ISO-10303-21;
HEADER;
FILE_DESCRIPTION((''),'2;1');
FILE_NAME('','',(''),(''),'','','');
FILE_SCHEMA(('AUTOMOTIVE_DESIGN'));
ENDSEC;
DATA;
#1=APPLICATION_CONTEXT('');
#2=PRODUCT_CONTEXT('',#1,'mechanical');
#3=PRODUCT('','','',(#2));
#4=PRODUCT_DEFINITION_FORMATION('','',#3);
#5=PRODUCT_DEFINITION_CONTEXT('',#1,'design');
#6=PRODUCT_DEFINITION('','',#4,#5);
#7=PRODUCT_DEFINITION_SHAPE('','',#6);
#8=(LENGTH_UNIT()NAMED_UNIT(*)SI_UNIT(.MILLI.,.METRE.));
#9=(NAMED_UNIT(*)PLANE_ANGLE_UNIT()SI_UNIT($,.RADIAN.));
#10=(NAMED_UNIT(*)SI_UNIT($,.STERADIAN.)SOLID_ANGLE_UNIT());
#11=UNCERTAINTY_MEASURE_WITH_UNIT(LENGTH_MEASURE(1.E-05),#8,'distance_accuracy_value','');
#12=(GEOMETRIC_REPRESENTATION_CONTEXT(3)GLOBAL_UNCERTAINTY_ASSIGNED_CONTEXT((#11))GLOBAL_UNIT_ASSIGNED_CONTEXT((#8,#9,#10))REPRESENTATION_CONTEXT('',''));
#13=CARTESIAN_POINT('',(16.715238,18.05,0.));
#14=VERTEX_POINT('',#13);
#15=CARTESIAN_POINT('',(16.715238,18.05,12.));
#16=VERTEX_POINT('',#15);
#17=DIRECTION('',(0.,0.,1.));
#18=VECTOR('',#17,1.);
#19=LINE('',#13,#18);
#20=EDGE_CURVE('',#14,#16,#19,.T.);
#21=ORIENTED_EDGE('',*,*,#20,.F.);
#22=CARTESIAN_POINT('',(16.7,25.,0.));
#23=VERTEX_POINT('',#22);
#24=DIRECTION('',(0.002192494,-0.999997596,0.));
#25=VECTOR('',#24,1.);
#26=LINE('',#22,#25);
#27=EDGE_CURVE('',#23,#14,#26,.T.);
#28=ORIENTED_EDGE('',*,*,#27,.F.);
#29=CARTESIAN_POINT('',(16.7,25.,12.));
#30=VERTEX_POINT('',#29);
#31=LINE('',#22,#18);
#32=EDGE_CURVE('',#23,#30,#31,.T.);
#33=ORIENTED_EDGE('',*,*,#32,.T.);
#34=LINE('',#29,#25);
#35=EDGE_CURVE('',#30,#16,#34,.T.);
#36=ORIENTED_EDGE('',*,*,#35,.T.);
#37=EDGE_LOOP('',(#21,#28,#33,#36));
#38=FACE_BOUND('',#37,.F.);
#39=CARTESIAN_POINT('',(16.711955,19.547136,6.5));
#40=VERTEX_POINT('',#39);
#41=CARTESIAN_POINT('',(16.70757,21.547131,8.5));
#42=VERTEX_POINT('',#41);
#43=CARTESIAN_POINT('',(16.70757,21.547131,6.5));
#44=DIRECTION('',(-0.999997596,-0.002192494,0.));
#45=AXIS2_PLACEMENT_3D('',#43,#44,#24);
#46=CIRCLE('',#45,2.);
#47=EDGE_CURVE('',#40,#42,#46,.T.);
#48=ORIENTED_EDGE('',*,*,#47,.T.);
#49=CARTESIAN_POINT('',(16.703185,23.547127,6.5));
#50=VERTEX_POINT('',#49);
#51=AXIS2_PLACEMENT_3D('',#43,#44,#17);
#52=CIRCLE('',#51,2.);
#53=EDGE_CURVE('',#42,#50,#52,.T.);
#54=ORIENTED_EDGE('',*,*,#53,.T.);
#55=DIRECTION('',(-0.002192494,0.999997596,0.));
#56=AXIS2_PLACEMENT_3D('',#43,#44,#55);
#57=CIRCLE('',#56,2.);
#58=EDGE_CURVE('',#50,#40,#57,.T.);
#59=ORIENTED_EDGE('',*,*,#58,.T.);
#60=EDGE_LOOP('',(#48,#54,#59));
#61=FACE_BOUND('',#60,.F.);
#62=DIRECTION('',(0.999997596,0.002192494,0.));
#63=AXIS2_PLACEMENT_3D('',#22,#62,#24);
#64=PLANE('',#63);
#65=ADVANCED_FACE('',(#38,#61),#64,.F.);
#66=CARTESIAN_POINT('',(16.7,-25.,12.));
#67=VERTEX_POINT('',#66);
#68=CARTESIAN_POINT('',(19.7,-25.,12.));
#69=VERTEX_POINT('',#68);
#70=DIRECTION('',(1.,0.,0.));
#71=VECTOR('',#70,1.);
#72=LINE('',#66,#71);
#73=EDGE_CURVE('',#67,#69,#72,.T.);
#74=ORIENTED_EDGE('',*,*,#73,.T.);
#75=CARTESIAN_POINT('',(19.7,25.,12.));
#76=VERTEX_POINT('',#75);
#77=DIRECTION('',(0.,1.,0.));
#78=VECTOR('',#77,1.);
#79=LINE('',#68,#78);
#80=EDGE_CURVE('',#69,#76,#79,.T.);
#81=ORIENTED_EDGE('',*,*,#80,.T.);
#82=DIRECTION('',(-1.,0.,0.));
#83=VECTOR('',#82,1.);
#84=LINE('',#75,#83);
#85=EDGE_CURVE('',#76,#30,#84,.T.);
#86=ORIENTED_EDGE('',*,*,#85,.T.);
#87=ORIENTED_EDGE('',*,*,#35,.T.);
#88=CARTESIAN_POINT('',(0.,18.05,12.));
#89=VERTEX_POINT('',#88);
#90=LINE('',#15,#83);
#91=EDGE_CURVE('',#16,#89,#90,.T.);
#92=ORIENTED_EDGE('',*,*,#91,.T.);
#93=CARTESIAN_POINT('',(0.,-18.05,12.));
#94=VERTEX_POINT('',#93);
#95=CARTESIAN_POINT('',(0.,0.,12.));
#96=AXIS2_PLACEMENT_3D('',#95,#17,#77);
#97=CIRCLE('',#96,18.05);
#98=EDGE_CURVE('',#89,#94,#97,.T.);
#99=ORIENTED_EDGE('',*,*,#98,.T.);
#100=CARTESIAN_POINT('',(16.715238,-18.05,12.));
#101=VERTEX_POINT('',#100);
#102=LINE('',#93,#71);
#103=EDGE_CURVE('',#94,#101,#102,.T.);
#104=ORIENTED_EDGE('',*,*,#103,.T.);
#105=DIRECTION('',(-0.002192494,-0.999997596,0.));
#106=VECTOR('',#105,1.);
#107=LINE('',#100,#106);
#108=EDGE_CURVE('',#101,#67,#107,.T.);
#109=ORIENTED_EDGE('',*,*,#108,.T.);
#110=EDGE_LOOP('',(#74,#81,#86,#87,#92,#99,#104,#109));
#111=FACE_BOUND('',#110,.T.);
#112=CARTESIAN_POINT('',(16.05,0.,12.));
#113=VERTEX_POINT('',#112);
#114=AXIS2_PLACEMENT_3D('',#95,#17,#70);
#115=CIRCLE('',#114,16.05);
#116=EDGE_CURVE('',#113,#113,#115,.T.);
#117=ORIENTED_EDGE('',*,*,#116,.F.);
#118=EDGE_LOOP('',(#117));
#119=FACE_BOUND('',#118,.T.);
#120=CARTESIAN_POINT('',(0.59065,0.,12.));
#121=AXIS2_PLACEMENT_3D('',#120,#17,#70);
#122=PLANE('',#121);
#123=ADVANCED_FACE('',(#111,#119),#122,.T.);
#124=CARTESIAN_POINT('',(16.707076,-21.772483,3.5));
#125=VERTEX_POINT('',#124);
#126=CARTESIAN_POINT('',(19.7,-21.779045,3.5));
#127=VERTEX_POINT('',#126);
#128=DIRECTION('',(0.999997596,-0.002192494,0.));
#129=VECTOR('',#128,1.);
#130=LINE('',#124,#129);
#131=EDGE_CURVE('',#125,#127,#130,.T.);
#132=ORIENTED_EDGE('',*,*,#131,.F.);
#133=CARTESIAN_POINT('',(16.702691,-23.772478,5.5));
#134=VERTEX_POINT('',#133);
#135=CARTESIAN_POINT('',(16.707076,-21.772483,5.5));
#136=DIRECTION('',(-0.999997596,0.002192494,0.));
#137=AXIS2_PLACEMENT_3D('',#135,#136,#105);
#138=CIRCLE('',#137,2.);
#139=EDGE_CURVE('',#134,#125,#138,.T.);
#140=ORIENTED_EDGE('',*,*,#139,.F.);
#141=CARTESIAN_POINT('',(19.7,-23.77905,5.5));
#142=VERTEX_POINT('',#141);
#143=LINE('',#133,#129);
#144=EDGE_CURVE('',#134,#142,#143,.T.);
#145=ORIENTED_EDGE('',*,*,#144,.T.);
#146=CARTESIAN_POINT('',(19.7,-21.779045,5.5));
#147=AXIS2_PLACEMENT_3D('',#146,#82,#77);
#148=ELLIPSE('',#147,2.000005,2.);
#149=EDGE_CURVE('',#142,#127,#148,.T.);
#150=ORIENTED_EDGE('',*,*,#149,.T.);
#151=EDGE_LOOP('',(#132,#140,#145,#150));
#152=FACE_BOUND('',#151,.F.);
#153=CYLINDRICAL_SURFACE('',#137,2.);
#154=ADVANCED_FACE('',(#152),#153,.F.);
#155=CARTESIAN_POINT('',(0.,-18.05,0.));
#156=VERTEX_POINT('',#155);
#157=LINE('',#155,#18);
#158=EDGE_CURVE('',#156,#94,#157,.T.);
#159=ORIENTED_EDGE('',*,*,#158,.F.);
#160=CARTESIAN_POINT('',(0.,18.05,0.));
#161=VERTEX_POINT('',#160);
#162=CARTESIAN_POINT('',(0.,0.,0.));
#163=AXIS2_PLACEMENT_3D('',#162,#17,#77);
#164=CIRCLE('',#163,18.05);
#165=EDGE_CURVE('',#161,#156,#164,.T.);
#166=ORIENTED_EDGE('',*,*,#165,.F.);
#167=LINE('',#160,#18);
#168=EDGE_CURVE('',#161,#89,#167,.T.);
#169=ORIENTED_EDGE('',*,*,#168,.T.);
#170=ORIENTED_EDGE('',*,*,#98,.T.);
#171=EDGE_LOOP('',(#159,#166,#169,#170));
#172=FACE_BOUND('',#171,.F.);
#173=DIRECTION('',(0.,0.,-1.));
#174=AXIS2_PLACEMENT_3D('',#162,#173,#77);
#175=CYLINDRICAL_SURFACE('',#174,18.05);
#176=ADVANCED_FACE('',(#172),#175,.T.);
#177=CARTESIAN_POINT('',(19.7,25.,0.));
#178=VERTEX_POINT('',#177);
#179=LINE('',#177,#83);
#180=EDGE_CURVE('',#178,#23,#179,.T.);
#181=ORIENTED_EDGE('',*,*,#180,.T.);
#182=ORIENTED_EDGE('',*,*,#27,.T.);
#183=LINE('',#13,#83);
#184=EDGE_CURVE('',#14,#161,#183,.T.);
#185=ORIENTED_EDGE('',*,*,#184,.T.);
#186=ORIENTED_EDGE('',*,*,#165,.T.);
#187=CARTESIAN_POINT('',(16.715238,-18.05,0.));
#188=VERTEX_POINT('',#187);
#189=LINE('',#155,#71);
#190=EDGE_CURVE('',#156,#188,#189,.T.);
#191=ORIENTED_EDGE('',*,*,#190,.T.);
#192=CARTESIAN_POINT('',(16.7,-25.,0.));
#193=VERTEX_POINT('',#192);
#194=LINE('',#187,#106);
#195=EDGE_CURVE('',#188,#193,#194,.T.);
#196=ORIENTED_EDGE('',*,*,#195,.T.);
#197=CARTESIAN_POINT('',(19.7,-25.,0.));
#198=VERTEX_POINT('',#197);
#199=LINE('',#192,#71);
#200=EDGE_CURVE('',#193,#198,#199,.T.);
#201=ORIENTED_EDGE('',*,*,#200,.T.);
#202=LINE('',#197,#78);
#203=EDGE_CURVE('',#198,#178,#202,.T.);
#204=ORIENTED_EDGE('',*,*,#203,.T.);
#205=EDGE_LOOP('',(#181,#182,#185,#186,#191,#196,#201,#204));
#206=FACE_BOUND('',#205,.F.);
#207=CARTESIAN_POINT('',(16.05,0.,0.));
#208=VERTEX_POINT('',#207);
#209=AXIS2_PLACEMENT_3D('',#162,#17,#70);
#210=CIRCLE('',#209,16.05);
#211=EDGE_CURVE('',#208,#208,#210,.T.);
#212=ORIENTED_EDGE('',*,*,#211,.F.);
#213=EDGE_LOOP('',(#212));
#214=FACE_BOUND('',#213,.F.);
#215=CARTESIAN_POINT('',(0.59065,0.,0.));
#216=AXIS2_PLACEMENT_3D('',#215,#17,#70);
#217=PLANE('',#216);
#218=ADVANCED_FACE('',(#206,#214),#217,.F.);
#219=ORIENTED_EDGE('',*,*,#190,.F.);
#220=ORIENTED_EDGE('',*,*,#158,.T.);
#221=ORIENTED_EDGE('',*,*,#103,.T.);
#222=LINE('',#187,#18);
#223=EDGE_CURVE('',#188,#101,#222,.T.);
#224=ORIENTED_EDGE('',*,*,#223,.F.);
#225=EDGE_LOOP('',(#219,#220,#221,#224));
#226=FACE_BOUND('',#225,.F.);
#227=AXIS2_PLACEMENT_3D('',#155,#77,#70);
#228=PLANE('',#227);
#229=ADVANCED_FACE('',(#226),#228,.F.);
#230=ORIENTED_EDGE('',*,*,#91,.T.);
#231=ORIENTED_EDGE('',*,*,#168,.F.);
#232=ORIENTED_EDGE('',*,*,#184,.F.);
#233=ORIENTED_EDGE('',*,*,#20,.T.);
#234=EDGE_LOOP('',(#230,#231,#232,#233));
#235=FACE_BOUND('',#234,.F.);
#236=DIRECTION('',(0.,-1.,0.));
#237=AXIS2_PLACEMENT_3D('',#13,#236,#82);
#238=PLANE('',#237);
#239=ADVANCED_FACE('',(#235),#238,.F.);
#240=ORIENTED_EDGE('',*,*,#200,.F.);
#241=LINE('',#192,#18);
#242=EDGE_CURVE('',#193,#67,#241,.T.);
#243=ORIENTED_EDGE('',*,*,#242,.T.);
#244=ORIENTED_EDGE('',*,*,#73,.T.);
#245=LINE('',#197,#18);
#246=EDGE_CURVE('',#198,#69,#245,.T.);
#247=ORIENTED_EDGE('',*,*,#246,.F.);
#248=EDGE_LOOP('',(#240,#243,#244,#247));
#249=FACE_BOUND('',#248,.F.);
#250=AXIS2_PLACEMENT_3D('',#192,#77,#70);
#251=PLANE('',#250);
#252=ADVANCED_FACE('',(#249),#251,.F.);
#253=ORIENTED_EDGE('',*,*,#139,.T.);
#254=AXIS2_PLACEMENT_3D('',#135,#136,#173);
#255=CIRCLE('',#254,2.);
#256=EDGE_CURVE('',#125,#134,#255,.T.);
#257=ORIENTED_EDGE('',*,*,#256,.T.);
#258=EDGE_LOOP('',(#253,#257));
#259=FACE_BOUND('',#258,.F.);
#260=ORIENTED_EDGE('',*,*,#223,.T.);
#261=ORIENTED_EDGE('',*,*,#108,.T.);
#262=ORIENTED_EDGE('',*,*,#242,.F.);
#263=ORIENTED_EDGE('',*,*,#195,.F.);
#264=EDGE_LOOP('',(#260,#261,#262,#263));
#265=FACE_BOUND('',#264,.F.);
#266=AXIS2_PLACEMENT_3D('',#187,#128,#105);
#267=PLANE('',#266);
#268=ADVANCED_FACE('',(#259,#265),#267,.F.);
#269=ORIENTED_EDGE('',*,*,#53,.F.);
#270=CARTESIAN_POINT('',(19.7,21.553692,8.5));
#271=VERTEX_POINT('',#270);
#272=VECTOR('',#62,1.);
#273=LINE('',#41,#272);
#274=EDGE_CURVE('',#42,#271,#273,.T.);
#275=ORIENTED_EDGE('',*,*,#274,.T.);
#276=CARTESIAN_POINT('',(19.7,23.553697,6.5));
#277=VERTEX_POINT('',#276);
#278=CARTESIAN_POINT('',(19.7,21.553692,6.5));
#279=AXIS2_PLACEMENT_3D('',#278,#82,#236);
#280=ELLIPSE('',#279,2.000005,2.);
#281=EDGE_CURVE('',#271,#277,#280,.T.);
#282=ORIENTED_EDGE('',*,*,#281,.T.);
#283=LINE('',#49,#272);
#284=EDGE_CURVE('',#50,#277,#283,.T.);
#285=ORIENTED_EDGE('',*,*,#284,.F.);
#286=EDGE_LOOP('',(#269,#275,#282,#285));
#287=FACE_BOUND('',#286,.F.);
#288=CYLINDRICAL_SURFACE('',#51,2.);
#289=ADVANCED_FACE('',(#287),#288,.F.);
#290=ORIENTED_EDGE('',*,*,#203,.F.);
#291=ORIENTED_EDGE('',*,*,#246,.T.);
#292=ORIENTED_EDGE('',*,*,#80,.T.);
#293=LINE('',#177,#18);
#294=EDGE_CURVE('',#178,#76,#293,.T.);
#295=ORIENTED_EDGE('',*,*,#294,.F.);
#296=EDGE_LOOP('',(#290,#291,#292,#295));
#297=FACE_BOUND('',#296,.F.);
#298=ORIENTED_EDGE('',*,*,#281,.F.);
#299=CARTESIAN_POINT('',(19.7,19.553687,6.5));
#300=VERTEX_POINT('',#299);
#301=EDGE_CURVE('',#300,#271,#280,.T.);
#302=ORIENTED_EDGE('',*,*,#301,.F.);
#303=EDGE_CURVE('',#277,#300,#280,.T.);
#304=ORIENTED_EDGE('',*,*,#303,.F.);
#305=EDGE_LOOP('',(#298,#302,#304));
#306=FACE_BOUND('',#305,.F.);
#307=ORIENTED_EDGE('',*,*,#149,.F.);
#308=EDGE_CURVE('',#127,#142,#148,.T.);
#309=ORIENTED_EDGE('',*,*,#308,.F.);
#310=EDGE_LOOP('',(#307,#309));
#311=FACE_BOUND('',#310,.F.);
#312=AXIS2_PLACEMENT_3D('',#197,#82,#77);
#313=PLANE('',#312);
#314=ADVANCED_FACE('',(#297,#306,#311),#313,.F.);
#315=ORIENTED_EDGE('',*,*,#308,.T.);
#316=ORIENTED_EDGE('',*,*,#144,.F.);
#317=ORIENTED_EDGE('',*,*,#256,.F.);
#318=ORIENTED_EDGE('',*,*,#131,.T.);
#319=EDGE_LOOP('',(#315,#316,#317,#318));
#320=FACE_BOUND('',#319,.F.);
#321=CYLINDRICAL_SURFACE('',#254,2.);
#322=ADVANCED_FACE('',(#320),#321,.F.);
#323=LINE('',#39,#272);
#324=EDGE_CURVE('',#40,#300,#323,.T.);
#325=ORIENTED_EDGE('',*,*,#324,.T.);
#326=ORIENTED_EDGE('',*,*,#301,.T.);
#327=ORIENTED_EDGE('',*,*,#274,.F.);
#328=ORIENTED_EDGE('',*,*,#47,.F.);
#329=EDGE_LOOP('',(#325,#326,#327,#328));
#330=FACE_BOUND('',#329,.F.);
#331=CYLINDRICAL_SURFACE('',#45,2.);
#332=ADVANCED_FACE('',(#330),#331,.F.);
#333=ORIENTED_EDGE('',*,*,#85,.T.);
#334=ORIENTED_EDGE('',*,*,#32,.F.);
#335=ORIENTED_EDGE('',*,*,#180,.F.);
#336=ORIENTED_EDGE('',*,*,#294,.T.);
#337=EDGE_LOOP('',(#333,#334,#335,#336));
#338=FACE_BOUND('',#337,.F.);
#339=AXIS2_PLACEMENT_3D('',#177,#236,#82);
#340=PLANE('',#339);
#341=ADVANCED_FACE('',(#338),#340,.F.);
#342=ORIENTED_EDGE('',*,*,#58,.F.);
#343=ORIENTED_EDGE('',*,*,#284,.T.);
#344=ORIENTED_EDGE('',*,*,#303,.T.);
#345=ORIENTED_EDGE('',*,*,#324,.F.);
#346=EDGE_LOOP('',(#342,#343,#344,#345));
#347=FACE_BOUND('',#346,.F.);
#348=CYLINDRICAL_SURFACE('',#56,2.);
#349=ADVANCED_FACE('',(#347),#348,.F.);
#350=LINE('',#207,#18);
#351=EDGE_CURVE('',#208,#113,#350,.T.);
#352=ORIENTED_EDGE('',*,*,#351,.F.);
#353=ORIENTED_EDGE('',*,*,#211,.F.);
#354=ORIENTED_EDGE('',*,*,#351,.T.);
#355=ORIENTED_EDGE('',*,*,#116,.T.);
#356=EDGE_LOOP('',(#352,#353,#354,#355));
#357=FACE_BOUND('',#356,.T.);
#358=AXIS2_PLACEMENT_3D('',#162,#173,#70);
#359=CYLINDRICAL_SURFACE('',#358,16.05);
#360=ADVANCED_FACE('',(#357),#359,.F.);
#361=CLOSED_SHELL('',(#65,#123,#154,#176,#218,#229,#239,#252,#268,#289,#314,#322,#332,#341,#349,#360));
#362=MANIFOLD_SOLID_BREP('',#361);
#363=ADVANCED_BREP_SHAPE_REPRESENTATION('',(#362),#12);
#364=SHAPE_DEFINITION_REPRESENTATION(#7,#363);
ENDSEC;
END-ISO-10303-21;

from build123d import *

# Parameters (mm, degrees)
F0_R     = 16.05
F1_DEPTH = 12
F3_DEPTH = 25
F5_DEPTH = 25


# Not quite as in the source:
# - a feature names something its author has since deleted; it is built from what else it names


with BuildPart() as f1:
    # F0 (on Top) → F1 (new body)
    with BuildSketch(Plane.XY):
        with BuildLine():
            ThreePointArc((0, -18.05), (12.7632774004, -12.7632774004), (18.05, 0))
            ThreePointArc((18.05, 0), (12.7632774004, 12.7632774004), (0, 18.05))
            ThreePointArc((0, 18.05), (-18.05, 0), (0, -18.05))
        make_face()
        Circle(F0_R, mode=Mode.SUBTRACT)
        with BuildLine():
            ThreePointArc((0, 18.05), (12.7632774004, 12.7632774004), (18.05, 0))
            ThreePointArc((18.05, 0), (12.7632774004, -12.7632774004), (0, -18.05))
            Line((0, -18.05), (16.7152378708, -18.05))
            Line((16.7152378708, -18.05), (16.7, -25))
            Line((16.7, -25), (19.7, -25))
            Line((19.7, -25), (19.7, 0))
            Line((19.7, 0), (19.7, 25))
            Line((19.7, 25), (16.7, 25))
            Line((16.7, 25), (16.7152378708, 18.05))
            Line((16.7152378708, 18.05), (0, 18.05))
        make_face()
    extrude(amount=F1_DEPTH)

    # F2 (on face) → F3 (cut)
    with BuildSketch(Plane(origin=(16.754731944, -0.0367347397, 0), x_dir=(-0.0021924941, -0.9999975965, 0), z_dir=(-0.9999975965, 0.0021924941, 0))):
        with BuildLine():
            ThreePointArc((23.7358004302, 5.5), (20.3215868678, 6.9142135624), (21.7358004302, 3.5))
            Line((21.7358004302, 3.5), (21.7358004302, 5.5))
            Line((21.7358004302, 5.5), (23.7358004302, 5.5))
        make_face()
        with BuildLine():
            Line((21.7358004302, 5.5), (21.7358004302, 3.5))
            ThreePointArc((21.7358004302, 3.5), (23.1500139926, 4.0857864376), (23.7358004302, 5.5))
            Line((23.7358004302, 5.5), (21.7358004302, 5.5))
        make_face()
    extrude(amount=-F3_DEPTH, mode=Mode.SUBTRACT)

    # F4 (on face) → F5 (cut)
    with BuildSketch(Plane(origin=(16.754731944, 0.0367347397, 0), x_dir=(0.0021924941, -0.9999975965, 0), z_dir=(-0.9999975965, -0.0021924941, 0))):
        with BuildLine():
            Line((-21.5104483068, 6.5), (-21.5104483068, 8.5))
            ThreePointArc((-21.5104483068, 8.5), (-22.9246618692, 7.9142135624), (-23.5104483068, 6.5))
            Line((-23.5104483068, 6.5), (-21.5104483068, 6.5))
        make_face()
        with BuildLine():
            ThreePointArc((-19.5104483068, 6.5), (-20.0962347444, 7.9142135624), (-21.5104483068, 8.5))
            Line((-21.5104483068, 8.5), (-21.5104483068, 6.5))
            Line((-21.5104483068, 6.5), (-23.5104483068, 6.5))
            ThreePointArc((-23.5104483068, 6.5), (-21.5104483068, 4.5), (-19.5104483068, 6.5))
        make_face()
    extrude(amount=-F5_DEPTH, mode=Mode.SUBTRACT)


solid = f1.part
